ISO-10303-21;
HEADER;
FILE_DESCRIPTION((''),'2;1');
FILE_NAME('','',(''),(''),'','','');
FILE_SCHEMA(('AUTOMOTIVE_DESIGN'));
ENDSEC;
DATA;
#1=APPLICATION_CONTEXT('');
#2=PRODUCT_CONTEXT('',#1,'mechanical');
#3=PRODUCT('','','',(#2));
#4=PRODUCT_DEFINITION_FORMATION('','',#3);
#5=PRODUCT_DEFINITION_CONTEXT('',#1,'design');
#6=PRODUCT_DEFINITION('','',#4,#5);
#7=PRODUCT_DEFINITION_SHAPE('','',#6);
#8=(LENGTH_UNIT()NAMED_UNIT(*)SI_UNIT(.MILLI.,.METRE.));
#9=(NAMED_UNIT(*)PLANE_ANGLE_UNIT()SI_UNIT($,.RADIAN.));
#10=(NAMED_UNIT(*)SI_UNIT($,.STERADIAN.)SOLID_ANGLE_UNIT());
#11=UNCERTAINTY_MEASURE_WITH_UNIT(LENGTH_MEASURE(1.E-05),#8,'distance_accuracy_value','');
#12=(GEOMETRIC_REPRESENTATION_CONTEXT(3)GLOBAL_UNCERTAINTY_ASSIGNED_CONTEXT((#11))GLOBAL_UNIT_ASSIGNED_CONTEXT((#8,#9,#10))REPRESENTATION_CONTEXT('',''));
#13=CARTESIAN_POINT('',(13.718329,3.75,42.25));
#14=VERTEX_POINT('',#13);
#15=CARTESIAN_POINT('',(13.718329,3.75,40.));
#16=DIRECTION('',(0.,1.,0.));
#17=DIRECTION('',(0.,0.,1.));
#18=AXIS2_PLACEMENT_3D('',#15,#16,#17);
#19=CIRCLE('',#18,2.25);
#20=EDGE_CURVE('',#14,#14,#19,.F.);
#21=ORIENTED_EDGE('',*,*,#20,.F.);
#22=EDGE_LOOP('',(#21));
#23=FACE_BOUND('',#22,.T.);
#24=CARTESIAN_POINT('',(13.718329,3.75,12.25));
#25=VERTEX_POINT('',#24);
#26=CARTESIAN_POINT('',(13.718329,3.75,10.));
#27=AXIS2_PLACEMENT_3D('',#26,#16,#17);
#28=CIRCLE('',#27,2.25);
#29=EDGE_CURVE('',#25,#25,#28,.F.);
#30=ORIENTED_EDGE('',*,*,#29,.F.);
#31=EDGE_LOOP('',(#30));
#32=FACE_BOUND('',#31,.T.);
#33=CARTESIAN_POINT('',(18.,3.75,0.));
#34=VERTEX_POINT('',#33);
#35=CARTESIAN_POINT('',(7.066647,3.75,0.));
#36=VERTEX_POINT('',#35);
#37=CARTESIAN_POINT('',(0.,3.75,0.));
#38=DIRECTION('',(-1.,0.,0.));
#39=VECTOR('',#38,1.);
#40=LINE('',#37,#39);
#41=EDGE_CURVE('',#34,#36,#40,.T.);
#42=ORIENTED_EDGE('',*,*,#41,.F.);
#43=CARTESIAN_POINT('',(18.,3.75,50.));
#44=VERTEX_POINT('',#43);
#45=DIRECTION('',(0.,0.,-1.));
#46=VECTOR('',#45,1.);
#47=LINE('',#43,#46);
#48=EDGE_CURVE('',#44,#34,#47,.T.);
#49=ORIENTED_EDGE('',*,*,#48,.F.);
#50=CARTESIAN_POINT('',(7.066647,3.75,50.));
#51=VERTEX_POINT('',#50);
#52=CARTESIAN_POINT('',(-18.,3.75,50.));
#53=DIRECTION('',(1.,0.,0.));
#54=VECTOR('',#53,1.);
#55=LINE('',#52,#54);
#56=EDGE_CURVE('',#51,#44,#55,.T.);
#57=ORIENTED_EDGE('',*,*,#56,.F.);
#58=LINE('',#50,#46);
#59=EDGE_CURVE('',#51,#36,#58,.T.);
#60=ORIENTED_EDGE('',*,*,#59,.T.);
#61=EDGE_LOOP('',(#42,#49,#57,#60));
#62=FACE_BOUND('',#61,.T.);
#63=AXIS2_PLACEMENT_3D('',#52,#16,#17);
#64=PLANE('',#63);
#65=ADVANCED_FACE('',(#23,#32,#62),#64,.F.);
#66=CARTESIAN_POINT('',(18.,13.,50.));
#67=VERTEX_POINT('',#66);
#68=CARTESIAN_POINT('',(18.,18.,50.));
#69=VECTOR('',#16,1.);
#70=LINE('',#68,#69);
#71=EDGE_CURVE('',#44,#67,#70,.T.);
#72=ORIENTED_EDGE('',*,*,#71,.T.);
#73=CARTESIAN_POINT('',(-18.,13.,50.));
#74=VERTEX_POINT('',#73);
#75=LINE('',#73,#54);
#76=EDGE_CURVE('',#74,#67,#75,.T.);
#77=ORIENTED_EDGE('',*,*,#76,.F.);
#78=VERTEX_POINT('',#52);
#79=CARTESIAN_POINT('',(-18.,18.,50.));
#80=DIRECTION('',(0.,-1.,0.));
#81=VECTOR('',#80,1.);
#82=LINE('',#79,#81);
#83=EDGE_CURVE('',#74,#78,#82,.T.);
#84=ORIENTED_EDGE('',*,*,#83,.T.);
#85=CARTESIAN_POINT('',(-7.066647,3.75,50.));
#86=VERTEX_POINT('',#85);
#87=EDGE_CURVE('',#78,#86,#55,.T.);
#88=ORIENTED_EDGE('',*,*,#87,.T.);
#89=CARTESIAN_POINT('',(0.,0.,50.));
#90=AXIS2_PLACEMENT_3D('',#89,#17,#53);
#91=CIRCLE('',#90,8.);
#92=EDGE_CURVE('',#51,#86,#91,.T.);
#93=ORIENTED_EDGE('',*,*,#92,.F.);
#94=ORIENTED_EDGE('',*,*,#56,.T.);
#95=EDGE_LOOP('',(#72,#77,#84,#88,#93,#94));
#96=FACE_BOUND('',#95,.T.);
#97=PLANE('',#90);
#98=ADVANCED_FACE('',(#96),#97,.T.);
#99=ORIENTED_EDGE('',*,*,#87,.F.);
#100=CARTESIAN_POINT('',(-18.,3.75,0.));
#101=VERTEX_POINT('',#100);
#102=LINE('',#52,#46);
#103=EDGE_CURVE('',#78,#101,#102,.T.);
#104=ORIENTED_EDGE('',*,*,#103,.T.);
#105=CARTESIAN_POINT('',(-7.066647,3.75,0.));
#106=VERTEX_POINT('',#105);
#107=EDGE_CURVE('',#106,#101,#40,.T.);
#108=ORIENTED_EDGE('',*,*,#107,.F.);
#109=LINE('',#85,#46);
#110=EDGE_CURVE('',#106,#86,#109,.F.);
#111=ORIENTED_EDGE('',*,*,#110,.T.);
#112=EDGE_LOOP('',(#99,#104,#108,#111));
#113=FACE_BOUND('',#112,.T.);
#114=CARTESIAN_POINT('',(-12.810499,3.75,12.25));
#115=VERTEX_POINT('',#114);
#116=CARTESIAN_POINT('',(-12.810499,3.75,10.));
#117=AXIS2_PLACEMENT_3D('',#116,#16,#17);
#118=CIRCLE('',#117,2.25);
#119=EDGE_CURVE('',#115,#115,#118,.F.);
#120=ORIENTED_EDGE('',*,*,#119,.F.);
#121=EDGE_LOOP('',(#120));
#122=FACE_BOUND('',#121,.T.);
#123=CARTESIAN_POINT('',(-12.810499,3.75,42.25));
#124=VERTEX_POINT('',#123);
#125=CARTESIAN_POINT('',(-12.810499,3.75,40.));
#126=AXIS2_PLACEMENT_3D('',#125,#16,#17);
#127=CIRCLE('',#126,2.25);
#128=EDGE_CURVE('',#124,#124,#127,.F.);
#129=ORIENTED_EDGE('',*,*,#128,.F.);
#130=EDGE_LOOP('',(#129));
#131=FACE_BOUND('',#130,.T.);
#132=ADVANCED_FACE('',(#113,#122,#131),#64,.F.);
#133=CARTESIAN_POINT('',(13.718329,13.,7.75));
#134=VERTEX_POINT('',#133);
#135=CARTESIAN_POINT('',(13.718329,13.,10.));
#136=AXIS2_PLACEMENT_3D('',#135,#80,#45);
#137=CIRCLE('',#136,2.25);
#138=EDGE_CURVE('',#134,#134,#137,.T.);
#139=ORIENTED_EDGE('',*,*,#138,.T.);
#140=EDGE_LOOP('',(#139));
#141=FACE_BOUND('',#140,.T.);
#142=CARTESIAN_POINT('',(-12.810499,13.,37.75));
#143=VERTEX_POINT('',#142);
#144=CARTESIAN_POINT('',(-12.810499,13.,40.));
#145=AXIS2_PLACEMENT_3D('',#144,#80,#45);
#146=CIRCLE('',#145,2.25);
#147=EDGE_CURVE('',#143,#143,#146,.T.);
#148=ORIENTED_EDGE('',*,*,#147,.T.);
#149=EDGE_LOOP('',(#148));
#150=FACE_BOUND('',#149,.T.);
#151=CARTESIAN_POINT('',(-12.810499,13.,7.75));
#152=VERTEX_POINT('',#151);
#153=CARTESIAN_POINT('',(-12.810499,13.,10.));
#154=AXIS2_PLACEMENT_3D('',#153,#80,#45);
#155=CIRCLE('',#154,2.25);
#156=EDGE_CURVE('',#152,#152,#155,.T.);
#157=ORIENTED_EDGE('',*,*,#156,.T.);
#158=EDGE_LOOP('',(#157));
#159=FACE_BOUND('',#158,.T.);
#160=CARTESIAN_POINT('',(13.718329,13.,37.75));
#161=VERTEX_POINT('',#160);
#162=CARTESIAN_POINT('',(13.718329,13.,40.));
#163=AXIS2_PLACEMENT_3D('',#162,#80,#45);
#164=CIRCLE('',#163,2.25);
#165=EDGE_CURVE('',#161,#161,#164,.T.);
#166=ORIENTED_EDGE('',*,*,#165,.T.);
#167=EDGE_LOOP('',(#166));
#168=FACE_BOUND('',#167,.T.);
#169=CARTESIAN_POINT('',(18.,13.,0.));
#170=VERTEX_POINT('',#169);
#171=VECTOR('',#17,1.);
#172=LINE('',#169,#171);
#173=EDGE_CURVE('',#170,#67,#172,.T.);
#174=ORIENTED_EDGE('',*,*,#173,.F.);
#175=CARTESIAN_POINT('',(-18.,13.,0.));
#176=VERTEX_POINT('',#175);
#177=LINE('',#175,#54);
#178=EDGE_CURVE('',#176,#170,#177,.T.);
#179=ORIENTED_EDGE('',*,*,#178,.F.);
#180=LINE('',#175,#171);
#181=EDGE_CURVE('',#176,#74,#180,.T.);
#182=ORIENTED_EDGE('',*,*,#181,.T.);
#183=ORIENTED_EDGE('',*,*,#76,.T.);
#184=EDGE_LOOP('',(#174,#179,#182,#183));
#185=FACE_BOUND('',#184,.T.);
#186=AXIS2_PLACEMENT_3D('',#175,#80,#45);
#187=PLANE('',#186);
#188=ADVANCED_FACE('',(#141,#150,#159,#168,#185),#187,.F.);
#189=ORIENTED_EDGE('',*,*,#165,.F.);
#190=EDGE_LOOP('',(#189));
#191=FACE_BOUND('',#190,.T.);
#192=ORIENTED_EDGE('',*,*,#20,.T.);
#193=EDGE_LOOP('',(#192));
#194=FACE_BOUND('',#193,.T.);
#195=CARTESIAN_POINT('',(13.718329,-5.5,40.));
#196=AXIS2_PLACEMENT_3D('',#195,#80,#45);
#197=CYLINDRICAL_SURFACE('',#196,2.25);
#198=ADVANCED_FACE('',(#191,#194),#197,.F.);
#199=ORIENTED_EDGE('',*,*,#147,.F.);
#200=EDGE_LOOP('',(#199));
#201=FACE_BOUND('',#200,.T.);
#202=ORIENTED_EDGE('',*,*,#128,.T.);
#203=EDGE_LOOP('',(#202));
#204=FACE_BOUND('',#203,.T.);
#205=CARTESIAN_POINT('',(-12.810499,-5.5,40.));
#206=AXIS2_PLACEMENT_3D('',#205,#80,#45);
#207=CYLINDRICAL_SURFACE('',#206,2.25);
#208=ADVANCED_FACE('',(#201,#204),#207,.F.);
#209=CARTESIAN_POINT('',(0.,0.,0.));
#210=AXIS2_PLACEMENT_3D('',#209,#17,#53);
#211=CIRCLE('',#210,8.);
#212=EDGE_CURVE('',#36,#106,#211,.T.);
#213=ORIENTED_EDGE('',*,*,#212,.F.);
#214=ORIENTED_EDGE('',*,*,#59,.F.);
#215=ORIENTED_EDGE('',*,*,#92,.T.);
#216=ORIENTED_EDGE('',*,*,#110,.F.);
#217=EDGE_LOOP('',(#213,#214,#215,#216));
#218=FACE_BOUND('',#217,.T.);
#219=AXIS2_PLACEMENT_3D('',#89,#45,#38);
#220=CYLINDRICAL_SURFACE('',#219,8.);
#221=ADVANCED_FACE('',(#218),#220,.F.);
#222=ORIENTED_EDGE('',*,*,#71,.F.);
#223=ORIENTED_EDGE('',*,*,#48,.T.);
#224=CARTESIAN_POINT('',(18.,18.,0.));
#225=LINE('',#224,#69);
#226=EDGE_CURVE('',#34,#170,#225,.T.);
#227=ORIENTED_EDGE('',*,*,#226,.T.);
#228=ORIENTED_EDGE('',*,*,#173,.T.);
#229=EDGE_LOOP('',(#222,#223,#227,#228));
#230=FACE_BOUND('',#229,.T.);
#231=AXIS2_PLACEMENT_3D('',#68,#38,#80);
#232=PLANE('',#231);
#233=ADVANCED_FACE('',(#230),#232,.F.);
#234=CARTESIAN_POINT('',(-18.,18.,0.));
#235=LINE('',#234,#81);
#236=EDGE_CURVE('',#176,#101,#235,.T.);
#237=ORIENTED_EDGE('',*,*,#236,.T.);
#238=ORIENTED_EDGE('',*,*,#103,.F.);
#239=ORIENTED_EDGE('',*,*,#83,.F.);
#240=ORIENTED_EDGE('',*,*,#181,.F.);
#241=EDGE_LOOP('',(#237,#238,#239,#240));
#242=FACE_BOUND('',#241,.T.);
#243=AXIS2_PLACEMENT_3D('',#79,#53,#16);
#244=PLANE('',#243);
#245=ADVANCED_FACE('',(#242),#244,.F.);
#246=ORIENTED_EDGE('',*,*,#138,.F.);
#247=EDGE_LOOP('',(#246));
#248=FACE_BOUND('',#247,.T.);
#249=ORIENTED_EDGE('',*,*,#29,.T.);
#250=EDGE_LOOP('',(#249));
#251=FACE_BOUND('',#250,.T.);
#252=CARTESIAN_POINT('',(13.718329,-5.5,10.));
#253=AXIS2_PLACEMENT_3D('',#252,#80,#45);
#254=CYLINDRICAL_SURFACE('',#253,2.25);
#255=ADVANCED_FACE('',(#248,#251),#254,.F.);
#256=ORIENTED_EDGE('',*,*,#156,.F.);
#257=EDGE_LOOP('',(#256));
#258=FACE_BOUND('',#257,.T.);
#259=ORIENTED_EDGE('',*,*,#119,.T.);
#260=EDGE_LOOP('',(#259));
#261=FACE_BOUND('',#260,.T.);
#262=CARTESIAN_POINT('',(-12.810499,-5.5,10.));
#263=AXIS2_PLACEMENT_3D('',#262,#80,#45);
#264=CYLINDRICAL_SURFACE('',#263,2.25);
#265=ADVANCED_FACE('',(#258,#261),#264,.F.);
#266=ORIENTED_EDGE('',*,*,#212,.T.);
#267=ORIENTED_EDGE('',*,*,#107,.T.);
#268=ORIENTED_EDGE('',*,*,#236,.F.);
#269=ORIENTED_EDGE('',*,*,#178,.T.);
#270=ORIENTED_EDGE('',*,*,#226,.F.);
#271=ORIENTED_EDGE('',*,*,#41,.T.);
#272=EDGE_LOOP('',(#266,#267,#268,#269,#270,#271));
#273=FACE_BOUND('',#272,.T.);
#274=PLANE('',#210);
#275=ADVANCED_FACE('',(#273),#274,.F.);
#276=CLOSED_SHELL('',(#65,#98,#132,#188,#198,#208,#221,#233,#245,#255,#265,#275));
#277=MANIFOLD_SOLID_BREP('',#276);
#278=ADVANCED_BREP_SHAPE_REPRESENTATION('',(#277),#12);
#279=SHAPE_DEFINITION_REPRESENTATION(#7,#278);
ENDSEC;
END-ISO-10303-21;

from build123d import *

# Parameters (mm, degrees)
IZIM1_W                     = 36
IZIM1_H                     = 36
IZIM1_R                     = 8
Y_KSEKLIK_EKSTR_ZYON1_DEPTH = 50
IZIM2_W                     = 36
IZIM2_H                     = 5
KES_EKSTR_ZYON1_DEPTH       = 50
IZIM3_W                     = 36
IZIM3_H                     = 3
KES_EKSTR_ZYON2_DEPTH       = 50
KES_EKSTR_ZYON3_DEPTH       = 50
M4_BO_LUKLU_DELIK1_D        = 4.5
KES_EKSTR_ZYON6_START       = -50
KES_EKSTR_ZYON6_DEPTH       = 50


# Read off the part's stored shape, not the designer's step: Kes-Ekstrüzyon6
with BuildPart() as part:
    # Çizim1 → Yükseklik-Ekstrüzyon1 (new body)
    with BuildSketch(Plane.XY):
        Rectangle(IZIM1_W, IZIM1_H)
        Circle(IZIM1_R, mode=Mode.SUBTRACT)
    extrude(amount=Y_KSEKLIK_EKSTR_ZYON1_DEPTH)

    # Çizim2 → Kes-Ekstrüzyon1 (cut)
    with BuildSketch(Plane.XY.offset(50)):
        with Locations((0, 15.5)):
            Rectangle(IZIM2_W, IZIM2_H)
    extrude(amount=-KES_EKSTR_ZYON1_DEPTH, mode=Mode.SUBTRACT)

    # Çizim3 → Kes-Ekstrüzyon2 (cut)
    with BuildSketch(Plane.XY.offset(50)):
        with Locations((0, -16.5)):
            Rectangle(IZIM3_W, IZIM3_H)
    extrude(amount=-KES_EKSTR_ZYON2_DEPTH, mode=Mode.SUBTRACT)

    # Çizim4 → Kes-Ekstrüzyon3 (cut)
    with BuildSketch(Plane.XY.offset(50)):
        Polygon((-6.350852961, -11), (-9.526279442, -5.5), (-18, -5.5), (-18, -15), (18, -15), (18, -5.5), (9.526279442, -5.5), (6.350852961, -11), align=None)
    extrude(amount=-KES_EKSTR_ZYON3_DEPTH, mode=Mode.SUBTRACT)

    # M4 Boşluklu Delik1 (through all)
    with Locations(Plane(origin=(0, -5.5, 0), x_dir=(-1, 0, 0), z_dir=(0, -1, 0))):
        with Locations((-13.718329125, -40), (-13.718329125, -10), (12.810498521, -10), (12.810498521, -40)):
            Hole(M4_BO_LUKLU_DELIK1_D / 2)

    # Kes-Ekstrüzyon6 outline → Kes-Ekstrüzyon6 (cut)
    with BuildSketch(Plane.XY.offset(50).offset(KES_EKSTR_ZYON6_START)):
        with BuildLine():
            Line((18, -5.5), (18, 3.75))
            Line((18, 3.75), (7.066647013, 3.75))
            ThreePointArc((7.066647013, 3.75), (0, -8), (-7.066647013, 3.75))
            Line((-7.066647013, 3.75), (-18, 3.75))
            Line((-18, 3.75), (-18, -5.5))
            Line((-18, -5.5), (-9.526279442, -5.5))
            Line((-9.526279442, -5.5), (-6.350852961, -11))
            Line((-6.350852961, -11), (6.350852961, -11))
            Line((6.350852961, -11), (9.526279442, -5.5))
            Line((9.526279442, -5.5), (18, -5.5))
        make_face()
    extrude(amount=KES_EKSTR_ZYON6_DEPTH, mode=Mode.SUBTRACT)


solid = part.part
